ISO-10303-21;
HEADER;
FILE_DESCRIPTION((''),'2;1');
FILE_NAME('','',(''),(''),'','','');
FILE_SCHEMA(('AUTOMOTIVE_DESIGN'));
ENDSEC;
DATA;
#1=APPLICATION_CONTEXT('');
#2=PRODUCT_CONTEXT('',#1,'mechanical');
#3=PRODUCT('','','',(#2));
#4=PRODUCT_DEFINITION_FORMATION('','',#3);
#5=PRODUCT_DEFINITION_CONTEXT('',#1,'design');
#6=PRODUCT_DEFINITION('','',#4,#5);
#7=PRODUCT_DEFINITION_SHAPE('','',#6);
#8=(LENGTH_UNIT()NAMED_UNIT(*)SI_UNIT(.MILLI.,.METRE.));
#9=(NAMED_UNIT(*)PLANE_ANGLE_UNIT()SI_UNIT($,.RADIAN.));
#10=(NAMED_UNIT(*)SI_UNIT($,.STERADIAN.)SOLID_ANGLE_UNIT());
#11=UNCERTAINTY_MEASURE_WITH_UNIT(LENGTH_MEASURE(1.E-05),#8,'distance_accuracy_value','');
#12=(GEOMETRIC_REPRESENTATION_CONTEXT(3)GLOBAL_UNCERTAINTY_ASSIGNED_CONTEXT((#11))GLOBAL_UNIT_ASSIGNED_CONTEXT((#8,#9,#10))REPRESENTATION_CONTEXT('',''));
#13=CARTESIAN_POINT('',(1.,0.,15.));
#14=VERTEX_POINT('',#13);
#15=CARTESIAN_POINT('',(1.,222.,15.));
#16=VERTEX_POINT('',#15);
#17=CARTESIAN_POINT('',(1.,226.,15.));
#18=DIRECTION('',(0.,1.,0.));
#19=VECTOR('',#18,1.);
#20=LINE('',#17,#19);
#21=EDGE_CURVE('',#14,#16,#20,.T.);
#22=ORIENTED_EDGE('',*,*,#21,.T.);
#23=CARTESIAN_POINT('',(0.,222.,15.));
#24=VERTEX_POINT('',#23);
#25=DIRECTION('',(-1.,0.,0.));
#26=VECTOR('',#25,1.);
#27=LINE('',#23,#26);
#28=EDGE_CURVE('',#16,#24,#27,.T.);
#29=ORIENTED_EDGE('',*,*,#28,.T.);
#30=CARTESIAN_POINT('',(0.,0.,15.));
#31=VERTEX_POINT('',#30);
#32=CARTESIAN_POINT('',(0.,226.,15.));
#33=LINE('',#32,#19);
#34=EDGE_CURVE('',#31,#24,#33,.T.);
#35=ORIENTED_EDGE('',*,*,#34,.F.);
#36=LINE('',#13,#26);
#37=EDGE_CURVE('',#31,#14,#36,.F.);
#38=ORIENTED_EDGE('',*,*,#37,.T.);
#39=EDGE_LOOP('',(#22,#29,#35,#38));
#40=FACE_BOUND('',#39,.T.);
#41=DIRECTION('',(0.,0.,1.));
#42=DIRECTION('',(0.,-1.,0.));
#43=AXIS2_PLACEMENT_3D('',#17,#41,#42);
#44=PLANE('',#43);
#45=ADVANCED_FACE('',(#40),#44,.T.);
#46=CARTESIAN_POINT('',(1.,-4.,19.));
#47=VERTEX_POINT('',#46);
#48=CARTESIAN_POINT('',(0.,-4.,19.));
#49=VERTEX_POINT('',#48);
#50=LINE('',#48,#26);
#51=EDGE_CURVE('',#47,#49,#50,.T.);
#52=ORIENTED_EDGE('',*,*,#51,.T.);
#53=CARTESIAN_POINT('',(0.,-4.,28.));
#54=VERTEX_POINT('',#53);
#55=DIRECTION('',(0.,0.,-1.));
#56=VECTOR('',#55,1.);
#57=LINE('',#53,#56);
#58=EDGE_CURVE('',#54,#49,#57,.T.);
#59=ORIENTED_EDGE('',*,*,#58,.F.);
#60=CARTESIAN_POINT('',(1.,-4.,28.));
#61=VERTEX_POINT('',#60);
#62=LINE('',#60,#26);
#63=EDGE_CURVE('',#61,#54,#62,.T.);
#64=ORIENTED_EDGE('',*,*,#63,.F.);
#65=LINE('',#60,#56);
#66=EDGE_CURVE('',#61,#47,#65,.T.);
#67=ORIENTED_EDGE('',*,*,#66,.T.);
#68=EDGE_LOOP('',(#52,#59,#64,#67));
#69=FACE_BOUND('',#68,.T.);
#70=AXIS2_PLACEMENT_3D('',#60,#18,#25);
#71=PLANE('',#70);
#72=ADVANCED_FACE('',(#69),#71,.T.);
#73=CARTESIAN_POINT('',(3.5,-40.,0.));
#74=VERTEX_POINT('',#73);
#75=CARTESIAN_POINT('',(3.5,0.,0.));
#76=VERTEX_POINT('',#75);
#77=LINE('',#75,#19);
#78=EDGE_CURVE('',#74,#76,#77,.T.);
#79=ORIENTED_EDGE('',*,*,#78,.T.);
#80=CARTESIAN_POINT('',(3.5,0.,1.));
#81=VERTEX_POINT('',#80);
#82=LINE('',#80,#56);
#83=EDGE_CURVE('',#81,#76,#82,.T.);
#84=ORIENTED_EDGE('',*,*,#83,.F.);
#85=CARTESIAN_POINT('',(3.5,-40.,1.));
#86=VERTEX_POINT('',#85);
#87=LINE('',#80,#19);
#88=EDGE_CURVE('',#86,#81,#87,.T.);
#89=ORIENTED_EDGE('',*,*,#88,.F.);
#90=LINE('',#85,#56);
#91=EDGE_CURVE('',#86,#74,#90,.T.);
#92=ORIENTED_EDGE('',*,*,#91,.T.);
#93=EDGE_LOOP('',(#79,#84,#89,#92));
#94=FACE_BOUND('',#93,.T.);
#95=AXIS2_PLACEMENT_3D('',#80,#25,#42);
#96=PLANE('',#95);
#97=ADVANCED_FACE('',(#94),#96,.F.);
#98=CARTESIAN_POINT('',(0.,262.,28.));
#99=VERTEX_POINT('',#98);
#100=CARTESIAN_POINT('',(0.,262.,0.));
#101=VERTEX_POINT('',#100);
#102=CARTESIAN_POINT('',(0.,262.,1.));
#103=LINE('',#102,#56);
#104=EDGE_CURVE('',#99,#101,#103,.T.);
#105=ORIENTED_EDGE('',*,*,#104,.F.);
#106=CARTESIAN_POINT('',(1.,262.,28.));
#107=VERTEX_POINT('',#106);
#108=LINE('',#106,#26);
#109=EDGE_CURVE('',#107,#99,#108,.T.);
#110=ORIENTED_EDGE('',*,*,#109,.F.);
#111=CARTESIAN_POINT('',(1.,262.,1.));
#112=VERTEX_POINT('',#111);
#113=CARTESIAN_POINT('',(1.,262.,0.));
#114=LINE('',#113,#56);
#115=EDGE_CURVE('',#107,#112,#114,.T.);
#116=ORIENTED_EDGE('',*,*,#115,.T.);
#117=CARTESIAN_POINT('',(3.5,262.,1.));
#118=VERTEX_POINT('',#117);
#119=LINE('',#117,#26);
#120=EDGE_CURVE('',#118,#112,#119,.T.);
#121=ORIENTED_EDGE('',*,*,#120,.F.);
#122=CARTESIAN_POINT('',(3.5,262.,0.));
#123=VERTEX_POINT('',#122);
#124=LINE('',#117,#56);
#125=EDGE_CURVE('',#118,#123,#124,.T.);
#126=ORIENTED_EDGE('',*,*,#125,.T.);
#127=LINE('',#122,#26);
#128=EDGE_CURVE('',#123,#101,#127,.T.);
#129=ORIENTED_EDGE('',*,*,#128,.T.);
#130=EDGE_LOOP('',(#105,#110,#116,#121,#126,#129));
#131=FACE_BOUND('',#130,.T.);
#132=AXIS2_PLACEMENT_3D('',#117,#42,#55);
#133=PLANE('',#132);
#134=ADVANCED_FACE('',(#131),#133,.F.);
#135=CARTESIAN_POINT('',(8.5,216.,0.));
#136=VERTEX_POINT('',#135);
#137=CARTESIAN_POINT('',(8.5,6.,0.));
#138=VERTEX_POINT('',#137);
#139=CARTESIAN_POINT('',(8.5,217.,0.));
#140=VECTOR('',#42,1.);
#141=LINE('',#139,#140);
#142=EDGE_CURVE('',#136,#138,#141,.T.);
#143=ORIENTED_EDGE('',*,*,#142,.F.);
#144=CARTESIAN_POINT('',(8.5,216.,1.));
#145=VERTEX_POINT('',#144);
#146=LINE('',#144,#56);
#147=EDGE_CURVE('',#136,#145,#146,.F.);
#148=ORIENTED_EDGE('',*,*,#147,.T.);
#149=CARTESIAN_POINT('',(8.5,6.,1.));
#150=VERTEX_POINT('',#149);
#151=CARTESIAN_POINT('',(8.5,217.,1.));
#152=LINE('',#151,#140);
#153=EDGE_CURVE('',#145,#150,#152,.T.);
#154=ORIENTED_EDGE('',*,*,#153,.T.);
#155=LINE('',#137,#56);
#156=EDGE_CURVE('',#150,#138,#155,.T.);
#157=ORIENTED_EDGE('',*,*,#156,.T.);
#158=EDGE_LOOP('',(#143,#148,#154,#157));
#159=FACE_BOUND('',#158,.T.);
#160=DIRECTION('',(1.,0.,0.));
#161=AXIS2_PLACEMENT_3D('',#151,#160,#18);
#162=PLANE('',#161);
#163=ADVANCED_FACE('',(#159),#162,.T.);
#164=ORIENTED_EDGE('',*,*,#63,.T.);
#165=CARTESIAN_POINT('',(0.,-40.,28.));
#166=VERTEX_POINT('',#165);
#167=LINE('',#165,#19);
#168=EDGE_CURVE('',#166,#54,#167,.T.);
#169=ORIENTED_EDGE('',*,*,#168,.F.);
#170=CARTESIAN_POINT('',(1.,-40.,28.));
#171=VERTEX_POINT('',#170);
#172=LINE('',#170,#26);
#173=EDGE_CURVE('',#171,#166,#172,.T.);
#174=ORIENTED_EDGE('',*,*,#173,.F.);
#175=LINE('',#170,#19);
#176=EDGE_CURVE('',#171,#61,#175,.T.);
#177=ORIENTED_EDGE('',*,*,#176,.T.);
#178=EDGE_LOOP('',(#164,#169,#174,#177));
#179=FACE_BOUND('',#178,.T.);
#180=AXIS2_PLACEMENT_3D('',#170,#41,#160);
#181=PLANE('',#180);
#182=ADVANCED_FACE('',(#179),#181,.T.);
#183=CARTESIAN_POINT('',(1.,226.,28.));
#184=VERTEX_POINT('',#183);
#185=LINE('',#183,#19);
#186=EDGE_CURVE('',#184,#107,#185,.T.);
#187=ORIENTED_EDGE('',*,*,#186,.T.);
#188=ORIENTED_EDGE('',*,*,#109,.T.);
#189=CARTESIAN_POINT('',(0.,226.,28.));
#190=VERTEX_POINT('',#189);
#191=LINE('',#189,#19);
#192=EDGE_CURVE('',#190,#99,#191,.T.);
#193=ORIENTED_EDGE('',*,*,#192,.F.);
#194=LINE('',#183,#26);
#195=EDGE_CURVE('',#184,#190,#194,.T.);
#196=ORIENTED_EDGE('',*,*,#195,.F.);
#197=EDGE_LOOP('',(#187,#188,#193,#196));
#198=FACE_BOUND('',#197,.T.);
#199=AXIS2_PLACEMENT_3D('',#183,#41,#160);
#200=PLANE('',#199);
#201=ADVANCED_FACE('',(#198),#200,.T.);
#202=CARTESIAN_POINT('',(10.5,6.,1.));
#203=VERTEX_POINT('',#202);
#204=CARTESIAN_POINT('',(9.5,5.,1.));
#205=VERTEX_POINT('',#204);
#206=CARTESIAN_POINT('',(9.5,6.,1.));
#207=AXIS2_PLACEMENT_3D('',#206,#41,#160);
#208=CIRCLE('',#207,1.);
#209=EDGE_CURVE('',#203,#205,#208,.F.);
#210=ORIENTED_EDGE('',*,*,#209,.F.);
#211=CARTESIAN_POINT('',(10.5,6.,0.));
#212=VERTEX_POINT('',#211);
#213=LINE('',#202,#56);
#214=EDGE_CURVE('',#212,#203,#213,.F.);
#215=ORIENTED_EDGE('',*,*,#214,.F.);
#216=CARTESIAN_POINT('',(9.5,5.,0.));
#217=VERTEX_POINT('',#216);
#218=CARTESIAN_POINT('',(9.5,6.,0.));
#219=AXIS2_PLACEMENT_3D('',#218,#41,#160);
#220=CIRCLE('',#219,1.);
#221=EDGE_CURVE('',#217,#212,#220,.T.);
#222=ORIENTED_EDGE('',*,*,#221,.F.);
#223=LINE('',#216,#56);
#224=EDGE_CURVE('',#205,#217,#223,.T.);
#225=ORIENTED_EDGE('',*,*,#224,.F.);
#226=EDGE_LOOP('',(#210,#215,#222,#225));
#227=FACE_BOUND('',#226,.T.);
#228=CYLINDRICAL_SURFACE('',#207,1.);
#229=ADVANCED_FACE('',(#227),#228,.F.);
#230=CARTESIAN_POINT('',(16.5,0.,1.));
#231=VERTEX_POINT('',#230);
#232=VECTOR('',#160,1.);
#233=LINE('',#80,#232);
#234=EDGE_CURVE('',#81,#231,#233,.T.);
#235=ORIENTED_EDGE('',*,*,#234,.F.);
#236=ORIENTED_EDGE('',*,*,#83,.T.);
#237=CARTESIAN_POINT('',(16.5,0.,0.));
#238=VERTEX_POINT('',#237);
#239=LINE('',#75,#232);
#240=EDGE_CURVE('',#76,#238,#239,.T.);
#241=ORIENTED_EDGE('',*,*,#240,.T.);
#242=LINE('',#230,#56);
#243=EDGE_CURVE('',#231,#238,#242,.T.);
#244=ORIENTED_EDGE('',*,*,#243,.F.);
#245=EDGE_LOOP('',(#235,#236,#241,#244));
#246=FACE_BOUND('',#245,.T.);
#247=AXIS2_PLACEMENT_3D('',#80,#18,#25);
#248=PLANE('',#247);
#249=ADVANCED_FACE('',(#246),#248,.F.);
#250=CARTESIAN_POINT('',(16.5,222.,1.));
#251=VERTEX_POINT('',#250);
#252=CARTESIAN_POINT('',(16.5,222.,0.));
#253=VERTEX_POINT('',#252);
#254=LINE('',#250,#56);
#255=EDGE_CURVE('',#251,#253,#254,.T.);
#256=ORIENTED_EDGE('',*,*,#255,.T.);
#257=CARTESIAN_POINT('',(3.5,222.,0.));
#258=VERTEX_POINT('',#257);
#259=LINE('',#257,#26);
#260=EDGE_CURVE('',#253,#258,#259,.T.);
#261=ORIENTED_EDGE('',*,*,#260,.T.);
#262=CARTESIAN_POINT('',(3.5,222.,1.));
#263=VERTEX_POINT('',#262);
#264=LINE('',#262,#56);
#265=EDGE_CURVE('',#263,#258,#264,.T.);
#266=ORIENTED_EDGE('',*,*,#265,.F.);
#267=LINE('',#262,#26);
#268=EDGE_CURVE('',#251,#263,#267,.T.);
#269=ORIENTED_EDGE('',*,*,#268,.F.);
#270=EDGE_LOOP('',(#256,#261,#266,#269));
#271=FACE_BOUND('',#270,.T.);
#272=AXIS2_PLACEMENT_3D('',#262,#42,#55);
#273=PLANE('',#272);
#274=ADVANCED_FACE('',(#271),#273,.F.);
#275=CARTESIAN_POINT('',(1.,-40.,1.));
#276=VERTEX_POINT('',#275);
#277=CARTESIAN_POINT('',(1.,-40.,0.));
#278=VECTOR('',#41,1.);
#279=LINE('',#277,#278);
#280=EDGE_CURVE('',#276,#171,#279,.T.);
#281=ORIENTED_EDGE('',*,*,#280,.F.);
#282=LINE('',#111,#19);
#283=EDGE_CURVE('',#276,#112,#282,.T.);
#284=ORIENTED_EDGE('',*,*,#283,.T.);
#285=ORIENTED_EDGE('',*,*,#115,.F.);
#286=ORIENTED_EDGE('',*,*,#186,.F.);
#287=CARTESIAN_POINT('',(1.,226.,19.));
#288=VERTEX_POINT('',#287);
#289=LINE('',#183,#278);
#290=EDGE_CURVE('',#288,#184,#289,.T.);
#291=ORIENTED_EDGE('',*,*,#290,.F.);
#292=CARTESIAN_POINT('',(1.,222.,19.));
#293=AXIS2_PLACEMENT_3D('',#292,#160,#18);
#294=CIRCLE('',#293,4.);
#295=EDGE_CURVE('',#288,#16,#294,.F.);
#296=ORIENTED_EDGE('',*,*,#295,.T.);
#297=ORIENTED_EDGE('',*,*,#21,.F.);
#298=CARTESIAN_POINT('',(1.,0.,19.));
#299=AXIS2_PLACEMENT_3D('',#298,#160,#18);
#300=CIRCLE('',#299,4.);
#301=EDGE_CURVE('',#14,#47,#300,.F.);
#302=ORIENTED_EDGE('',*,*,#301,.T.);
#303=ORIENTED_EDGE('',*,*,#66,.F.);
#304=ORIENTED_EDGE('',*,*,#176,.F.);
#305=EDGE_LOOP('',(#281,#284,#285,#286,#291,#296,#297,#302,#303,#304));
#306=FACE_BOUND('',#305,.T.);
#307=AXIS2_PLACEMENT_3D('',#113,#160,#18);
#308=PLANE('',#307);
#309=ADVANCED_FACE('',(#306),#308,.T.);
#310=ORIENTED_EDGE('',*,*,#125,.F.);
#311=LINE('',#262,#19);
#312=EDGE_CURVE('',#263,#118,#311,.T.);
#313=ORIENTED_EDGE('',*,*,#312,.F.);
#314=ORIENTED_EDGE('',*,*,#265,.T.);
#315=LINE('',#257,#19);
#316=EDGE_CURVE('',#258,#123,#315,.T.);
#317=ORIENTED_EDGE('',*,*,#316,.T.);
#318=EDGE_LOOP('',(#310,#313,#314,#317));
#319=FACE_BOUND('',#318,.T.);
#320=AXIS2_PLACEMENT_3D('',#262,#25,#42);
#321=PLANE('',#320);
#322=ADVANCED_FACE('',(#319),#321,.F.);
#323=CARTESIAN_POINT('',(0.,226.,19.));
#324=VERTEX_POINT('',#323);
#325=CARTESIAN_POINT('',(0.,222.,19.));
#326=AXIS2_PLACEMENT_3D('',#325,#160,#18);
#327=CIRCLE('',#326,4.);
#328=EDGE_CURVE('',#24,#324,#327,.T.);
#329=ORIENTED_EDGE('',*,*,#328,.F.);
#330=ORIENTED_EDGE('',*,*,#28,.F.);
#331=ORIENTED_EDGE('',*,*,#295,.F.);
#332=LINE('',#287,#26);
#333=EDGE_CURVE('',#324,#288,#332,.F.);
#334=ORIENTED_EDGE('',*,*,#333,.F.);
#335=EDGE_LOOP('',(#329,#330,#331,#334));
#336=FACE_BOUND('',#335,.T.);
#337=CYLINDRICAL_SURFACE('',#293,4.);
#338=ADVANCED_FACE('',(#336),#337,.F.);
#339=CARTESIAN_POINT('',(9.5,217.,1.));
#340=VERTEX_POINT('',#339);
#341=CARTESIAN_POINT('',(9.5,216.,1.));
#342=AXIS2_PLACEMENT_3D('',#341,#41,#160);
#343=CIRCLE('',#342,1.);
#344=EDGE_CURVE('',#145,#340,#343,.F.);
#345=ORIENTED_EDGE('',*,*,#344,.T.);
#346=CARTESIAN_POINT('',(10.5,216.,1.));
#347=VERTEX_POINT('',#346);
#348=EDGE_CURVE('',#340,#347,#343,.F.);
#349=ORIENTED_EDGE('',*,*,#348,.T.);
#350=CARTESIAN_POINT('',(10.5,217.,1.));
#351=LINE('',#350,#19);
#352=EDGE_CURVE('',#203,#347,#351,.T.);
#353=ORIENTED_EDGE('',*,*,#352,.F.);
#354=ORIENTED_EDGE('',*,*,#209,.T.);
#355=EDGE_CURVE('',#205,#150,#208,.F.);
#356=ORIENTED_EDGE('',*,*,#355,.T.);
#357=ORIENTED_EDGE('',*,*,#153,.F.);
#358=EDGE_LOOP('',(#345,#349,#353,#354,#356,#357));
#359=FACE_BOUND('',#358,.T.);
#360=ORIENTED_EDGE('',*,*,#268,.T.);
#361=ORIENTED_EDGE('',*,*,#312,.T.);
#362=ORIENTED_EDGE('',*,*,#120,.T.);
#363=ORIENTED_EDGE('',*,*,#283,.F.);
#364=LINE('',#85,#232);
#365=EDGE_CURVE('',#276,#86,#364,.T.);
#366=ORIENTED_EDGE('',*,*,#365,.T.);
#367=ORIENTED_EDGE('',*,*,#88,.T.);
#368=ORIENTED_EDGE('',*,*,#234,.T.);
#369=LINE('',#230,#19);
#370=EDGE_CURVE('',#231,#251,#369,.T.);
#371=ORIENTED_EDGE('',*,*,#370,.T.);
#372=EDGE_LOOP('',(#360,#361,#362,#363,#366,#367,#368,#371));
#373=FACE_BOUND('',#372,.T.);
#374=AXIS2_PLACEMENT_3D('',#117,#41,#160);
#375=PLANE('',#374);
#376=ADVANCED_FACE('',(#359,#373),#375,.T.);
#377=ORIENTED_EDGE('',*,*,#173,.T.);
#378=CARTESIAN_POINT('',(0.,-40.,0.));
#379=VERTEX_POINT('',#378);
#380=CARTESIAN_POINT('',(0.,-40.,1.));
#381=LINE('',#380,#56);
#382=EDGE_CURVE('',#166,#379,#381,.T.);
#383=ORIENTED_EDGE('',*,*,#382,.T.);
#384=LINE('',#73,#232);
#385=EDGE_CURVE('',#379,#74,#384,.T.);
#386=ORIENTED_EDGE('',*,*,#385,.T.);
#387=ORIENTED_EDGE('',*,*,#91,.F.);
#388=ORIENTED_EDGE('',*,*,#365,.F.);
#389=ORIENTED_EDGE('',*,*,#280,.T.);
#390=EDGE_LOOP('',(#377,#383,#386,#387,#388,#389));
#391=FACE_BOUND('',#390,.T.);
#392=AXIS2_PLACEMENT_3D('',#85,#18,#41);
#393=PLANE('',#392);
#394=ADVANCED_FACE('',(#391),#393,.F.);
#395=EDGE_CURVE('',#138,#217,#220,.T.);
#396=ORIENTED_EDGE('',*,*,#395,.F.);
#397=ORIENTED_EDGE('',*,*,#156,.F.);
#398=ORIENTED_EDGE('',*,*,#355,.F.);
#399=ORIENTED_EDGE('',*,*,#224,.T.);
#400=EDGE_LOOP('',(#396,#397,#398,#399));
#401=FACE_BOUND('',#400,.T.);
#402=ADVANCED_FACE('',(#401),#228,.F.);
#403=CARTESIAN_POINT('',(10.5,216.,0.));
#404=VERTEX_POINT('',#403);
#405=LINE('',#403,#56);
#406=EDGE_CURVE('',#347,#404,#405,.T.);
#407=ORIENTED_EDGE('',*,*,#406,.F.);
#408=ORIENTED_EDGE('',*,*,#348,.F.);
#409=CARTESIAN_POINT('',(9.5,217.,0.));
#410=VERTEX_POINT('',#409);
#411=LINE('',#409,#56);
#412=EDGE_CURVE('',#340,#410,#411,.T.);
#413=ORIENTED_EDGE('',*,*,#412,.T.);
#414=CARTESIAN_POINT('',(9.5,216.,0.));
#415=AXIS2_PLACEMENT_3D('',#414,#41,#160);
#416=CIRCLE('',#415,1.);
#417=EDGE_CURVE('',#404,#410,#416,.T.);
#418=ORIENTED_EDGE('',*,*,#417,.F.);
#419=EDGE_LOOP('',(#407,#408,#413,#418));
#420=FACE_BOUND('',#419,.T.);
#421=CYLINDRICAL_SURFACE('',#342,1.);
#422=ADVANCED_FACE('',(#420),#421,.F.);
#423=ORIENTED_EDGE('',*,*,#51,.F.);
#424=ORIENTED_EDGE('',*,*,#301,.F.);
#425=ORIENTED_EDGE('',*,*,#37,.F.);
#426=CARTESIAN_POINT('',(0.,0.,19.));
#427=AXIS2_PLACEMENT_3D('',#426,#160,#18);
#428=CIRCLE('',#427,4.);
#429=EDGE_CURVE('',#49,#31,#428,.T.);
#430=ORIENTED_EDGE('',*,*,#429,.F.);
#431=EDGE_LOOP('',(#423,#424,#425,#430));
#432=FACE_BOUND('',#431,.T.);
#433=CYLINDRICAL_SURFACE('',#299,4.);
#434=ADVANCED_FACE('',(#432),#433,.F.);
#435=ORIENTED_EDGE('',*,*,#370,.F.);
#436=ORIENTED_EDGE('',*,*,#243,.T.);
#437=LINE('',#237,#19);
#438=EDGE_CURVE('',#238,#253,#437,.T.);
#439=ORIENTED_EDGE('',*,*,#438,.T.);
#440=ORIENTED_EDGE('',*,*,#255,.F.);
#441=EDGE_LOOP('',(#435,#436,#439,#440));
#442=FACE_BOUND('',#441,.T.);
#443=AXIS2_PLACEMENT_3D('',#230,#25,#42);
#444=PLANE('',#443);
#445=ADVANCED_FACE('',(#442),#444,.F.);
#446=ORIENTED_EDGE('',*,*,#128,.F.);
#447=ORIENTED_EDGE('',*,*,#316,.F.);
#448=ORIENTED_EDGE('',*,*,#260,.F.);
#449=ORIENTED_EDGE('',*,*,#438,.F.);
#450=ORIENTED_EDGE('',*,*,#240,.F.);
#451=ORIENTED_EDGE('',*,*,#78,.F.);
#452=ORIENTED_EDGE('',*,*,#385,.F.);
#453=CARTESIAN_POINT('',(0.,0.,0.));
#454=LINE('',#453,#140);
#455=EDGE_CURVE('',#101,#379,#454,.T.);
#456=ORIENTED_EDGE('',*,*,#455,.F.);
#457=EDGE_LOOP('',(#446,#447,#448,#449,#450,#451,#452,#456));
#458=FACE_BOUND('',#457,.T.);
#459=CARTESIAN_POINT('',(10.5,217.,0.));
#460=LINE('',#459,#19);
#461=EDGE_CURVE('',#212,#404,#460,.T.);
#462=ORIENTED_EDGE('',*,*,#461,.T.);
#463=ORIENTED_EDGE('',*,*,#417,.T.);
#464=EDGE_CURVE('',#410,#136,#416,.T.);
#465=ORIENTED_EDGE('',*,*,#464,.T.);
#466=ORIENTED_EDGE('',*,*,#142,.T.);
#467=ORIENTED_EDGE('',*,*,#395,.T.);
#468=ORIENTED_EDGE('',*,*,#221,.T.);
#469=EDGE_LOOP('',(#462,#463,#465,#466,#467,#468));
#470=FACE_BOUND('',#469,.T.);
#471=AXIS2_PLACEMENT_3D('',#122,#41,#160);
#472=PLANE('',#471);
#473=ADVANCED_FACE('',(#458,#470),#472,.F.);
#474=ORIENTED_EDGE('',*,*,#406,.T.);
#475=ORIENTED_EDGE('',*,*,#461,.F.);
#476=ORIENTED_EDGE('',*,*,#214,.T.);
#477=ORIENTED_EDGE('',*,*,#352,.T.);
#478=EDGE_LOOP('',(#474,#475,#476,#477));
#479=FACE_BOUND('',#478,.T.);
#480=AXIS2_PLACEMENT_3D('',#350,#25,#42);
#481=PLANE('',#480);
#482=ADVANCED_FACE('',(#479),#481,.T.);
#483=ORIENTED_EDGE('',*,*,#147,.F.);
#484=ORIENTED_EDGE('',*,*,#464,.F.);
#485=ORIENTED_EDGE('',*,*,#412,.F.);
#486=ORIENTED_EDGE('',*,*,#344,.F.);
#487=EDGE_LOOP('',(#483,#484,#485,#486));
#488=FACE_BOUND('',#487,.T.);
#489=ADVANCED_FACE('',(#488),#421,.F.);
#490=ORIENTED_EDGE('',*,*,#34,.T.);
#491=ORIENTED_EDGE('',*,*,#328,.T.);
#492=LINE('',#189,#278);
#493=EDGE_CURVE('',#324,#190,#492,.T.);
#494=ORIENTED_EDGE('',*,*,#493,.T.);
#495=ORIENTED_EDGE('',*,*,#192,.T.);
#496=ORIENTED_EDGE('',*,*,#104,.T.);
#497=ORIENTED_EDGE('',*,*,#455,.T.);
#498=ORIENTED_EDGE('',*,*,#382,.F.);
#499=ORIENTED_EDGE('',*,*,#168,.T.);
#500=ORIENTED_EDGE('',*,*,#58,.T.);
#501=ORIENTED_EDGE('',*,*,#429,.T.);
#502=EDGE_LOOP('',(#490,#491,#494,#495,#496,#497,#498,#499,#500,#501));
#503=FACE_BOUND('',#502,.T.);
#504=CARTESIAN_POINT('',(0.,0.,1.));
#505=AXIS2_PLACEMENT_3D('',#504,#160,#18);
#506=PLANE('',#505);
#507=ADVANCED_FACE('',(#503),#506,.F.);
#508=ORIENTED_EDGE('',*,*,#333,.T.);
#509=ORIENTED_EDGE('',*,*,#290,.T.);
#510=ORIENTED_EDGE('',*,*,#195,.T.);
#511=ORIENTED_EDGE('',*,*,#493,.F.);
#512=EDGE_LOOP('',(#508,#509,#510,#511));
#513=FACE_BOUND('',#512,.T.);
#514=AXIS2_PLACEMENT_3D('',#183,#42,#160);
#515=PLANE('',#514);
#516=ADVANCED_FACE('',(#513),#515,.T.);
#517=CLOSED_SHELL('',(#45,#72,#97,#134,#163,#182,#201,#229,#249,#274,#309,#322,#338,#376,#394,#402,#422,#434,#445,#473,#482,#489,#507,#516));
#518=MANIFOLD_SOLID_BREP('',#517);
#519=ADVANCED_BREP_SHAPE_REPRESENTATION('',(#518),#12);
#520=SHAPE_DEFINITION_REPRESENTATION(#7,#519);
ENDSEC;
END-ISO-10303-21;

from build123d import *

# Parameters (mm, degrees)
SKETCH_1_W      = 2
SKETCH_1_H      = 212
EXTRUDE_1_DEPTH = 1
FILLET_1_R      = 1
EXTRUDE_2_DEPTH = 1
FILLET_2_R      = 4


with BuildPart() as part:
    # Эскиз1 → Бобышка-Вытянуть1 (new body)
    with BuildSketch(Plane.XY):
        Polygon((3.5, 0), (16.5, 0), (16.5, 222), (3.5, 222), (3.5, 262), (0, 262), (0, 222), (0, 0), (0, -40), (3.5, -40), align=None)
        with Locations((9.5, 111)):
            Rectangle(SKETCH_1_W, SKETCH_1_H, mode=Mode.SUBTRACT)
    extrude(amount=EXTRUDE_1_DEPTH)

    # Скругление1
    fillet_1_edges = [part.edges().sort_by_distance(p)[0] for p in [
        (8.5, 5, 0.5),
        (10.5, 5, 0.5),
        (10.5, 217, 0.5),
        (8.5, 217, 0.5),
    ]]
    fillet(fillet_1_edges, radius=FILLET_1_R - 0.0001)  # a hair under: the kernel refuses the full size

    # Эскиз2 → Бобышка-Вытянуть2 (add)
    with BuildSketch(Plane.ZY):
        Polygon((0, -40), (28, -40), (28, -4), (15, -4), (15, 226), (28, 226), (28, 262), (0, 262), align=None)
    extrude(amount=-EXTRUDE_2_DEPTH)

    # Скругление2
    fillet_2_edges = [part.edges().sort_by_distance(p)[0] for p in [
        (0.5, 226, 15),
        (0.5, -4, 15),
    ]]
    fillet(fillet_2_edges, radius=FILLET_2_R)


solid = part.part
